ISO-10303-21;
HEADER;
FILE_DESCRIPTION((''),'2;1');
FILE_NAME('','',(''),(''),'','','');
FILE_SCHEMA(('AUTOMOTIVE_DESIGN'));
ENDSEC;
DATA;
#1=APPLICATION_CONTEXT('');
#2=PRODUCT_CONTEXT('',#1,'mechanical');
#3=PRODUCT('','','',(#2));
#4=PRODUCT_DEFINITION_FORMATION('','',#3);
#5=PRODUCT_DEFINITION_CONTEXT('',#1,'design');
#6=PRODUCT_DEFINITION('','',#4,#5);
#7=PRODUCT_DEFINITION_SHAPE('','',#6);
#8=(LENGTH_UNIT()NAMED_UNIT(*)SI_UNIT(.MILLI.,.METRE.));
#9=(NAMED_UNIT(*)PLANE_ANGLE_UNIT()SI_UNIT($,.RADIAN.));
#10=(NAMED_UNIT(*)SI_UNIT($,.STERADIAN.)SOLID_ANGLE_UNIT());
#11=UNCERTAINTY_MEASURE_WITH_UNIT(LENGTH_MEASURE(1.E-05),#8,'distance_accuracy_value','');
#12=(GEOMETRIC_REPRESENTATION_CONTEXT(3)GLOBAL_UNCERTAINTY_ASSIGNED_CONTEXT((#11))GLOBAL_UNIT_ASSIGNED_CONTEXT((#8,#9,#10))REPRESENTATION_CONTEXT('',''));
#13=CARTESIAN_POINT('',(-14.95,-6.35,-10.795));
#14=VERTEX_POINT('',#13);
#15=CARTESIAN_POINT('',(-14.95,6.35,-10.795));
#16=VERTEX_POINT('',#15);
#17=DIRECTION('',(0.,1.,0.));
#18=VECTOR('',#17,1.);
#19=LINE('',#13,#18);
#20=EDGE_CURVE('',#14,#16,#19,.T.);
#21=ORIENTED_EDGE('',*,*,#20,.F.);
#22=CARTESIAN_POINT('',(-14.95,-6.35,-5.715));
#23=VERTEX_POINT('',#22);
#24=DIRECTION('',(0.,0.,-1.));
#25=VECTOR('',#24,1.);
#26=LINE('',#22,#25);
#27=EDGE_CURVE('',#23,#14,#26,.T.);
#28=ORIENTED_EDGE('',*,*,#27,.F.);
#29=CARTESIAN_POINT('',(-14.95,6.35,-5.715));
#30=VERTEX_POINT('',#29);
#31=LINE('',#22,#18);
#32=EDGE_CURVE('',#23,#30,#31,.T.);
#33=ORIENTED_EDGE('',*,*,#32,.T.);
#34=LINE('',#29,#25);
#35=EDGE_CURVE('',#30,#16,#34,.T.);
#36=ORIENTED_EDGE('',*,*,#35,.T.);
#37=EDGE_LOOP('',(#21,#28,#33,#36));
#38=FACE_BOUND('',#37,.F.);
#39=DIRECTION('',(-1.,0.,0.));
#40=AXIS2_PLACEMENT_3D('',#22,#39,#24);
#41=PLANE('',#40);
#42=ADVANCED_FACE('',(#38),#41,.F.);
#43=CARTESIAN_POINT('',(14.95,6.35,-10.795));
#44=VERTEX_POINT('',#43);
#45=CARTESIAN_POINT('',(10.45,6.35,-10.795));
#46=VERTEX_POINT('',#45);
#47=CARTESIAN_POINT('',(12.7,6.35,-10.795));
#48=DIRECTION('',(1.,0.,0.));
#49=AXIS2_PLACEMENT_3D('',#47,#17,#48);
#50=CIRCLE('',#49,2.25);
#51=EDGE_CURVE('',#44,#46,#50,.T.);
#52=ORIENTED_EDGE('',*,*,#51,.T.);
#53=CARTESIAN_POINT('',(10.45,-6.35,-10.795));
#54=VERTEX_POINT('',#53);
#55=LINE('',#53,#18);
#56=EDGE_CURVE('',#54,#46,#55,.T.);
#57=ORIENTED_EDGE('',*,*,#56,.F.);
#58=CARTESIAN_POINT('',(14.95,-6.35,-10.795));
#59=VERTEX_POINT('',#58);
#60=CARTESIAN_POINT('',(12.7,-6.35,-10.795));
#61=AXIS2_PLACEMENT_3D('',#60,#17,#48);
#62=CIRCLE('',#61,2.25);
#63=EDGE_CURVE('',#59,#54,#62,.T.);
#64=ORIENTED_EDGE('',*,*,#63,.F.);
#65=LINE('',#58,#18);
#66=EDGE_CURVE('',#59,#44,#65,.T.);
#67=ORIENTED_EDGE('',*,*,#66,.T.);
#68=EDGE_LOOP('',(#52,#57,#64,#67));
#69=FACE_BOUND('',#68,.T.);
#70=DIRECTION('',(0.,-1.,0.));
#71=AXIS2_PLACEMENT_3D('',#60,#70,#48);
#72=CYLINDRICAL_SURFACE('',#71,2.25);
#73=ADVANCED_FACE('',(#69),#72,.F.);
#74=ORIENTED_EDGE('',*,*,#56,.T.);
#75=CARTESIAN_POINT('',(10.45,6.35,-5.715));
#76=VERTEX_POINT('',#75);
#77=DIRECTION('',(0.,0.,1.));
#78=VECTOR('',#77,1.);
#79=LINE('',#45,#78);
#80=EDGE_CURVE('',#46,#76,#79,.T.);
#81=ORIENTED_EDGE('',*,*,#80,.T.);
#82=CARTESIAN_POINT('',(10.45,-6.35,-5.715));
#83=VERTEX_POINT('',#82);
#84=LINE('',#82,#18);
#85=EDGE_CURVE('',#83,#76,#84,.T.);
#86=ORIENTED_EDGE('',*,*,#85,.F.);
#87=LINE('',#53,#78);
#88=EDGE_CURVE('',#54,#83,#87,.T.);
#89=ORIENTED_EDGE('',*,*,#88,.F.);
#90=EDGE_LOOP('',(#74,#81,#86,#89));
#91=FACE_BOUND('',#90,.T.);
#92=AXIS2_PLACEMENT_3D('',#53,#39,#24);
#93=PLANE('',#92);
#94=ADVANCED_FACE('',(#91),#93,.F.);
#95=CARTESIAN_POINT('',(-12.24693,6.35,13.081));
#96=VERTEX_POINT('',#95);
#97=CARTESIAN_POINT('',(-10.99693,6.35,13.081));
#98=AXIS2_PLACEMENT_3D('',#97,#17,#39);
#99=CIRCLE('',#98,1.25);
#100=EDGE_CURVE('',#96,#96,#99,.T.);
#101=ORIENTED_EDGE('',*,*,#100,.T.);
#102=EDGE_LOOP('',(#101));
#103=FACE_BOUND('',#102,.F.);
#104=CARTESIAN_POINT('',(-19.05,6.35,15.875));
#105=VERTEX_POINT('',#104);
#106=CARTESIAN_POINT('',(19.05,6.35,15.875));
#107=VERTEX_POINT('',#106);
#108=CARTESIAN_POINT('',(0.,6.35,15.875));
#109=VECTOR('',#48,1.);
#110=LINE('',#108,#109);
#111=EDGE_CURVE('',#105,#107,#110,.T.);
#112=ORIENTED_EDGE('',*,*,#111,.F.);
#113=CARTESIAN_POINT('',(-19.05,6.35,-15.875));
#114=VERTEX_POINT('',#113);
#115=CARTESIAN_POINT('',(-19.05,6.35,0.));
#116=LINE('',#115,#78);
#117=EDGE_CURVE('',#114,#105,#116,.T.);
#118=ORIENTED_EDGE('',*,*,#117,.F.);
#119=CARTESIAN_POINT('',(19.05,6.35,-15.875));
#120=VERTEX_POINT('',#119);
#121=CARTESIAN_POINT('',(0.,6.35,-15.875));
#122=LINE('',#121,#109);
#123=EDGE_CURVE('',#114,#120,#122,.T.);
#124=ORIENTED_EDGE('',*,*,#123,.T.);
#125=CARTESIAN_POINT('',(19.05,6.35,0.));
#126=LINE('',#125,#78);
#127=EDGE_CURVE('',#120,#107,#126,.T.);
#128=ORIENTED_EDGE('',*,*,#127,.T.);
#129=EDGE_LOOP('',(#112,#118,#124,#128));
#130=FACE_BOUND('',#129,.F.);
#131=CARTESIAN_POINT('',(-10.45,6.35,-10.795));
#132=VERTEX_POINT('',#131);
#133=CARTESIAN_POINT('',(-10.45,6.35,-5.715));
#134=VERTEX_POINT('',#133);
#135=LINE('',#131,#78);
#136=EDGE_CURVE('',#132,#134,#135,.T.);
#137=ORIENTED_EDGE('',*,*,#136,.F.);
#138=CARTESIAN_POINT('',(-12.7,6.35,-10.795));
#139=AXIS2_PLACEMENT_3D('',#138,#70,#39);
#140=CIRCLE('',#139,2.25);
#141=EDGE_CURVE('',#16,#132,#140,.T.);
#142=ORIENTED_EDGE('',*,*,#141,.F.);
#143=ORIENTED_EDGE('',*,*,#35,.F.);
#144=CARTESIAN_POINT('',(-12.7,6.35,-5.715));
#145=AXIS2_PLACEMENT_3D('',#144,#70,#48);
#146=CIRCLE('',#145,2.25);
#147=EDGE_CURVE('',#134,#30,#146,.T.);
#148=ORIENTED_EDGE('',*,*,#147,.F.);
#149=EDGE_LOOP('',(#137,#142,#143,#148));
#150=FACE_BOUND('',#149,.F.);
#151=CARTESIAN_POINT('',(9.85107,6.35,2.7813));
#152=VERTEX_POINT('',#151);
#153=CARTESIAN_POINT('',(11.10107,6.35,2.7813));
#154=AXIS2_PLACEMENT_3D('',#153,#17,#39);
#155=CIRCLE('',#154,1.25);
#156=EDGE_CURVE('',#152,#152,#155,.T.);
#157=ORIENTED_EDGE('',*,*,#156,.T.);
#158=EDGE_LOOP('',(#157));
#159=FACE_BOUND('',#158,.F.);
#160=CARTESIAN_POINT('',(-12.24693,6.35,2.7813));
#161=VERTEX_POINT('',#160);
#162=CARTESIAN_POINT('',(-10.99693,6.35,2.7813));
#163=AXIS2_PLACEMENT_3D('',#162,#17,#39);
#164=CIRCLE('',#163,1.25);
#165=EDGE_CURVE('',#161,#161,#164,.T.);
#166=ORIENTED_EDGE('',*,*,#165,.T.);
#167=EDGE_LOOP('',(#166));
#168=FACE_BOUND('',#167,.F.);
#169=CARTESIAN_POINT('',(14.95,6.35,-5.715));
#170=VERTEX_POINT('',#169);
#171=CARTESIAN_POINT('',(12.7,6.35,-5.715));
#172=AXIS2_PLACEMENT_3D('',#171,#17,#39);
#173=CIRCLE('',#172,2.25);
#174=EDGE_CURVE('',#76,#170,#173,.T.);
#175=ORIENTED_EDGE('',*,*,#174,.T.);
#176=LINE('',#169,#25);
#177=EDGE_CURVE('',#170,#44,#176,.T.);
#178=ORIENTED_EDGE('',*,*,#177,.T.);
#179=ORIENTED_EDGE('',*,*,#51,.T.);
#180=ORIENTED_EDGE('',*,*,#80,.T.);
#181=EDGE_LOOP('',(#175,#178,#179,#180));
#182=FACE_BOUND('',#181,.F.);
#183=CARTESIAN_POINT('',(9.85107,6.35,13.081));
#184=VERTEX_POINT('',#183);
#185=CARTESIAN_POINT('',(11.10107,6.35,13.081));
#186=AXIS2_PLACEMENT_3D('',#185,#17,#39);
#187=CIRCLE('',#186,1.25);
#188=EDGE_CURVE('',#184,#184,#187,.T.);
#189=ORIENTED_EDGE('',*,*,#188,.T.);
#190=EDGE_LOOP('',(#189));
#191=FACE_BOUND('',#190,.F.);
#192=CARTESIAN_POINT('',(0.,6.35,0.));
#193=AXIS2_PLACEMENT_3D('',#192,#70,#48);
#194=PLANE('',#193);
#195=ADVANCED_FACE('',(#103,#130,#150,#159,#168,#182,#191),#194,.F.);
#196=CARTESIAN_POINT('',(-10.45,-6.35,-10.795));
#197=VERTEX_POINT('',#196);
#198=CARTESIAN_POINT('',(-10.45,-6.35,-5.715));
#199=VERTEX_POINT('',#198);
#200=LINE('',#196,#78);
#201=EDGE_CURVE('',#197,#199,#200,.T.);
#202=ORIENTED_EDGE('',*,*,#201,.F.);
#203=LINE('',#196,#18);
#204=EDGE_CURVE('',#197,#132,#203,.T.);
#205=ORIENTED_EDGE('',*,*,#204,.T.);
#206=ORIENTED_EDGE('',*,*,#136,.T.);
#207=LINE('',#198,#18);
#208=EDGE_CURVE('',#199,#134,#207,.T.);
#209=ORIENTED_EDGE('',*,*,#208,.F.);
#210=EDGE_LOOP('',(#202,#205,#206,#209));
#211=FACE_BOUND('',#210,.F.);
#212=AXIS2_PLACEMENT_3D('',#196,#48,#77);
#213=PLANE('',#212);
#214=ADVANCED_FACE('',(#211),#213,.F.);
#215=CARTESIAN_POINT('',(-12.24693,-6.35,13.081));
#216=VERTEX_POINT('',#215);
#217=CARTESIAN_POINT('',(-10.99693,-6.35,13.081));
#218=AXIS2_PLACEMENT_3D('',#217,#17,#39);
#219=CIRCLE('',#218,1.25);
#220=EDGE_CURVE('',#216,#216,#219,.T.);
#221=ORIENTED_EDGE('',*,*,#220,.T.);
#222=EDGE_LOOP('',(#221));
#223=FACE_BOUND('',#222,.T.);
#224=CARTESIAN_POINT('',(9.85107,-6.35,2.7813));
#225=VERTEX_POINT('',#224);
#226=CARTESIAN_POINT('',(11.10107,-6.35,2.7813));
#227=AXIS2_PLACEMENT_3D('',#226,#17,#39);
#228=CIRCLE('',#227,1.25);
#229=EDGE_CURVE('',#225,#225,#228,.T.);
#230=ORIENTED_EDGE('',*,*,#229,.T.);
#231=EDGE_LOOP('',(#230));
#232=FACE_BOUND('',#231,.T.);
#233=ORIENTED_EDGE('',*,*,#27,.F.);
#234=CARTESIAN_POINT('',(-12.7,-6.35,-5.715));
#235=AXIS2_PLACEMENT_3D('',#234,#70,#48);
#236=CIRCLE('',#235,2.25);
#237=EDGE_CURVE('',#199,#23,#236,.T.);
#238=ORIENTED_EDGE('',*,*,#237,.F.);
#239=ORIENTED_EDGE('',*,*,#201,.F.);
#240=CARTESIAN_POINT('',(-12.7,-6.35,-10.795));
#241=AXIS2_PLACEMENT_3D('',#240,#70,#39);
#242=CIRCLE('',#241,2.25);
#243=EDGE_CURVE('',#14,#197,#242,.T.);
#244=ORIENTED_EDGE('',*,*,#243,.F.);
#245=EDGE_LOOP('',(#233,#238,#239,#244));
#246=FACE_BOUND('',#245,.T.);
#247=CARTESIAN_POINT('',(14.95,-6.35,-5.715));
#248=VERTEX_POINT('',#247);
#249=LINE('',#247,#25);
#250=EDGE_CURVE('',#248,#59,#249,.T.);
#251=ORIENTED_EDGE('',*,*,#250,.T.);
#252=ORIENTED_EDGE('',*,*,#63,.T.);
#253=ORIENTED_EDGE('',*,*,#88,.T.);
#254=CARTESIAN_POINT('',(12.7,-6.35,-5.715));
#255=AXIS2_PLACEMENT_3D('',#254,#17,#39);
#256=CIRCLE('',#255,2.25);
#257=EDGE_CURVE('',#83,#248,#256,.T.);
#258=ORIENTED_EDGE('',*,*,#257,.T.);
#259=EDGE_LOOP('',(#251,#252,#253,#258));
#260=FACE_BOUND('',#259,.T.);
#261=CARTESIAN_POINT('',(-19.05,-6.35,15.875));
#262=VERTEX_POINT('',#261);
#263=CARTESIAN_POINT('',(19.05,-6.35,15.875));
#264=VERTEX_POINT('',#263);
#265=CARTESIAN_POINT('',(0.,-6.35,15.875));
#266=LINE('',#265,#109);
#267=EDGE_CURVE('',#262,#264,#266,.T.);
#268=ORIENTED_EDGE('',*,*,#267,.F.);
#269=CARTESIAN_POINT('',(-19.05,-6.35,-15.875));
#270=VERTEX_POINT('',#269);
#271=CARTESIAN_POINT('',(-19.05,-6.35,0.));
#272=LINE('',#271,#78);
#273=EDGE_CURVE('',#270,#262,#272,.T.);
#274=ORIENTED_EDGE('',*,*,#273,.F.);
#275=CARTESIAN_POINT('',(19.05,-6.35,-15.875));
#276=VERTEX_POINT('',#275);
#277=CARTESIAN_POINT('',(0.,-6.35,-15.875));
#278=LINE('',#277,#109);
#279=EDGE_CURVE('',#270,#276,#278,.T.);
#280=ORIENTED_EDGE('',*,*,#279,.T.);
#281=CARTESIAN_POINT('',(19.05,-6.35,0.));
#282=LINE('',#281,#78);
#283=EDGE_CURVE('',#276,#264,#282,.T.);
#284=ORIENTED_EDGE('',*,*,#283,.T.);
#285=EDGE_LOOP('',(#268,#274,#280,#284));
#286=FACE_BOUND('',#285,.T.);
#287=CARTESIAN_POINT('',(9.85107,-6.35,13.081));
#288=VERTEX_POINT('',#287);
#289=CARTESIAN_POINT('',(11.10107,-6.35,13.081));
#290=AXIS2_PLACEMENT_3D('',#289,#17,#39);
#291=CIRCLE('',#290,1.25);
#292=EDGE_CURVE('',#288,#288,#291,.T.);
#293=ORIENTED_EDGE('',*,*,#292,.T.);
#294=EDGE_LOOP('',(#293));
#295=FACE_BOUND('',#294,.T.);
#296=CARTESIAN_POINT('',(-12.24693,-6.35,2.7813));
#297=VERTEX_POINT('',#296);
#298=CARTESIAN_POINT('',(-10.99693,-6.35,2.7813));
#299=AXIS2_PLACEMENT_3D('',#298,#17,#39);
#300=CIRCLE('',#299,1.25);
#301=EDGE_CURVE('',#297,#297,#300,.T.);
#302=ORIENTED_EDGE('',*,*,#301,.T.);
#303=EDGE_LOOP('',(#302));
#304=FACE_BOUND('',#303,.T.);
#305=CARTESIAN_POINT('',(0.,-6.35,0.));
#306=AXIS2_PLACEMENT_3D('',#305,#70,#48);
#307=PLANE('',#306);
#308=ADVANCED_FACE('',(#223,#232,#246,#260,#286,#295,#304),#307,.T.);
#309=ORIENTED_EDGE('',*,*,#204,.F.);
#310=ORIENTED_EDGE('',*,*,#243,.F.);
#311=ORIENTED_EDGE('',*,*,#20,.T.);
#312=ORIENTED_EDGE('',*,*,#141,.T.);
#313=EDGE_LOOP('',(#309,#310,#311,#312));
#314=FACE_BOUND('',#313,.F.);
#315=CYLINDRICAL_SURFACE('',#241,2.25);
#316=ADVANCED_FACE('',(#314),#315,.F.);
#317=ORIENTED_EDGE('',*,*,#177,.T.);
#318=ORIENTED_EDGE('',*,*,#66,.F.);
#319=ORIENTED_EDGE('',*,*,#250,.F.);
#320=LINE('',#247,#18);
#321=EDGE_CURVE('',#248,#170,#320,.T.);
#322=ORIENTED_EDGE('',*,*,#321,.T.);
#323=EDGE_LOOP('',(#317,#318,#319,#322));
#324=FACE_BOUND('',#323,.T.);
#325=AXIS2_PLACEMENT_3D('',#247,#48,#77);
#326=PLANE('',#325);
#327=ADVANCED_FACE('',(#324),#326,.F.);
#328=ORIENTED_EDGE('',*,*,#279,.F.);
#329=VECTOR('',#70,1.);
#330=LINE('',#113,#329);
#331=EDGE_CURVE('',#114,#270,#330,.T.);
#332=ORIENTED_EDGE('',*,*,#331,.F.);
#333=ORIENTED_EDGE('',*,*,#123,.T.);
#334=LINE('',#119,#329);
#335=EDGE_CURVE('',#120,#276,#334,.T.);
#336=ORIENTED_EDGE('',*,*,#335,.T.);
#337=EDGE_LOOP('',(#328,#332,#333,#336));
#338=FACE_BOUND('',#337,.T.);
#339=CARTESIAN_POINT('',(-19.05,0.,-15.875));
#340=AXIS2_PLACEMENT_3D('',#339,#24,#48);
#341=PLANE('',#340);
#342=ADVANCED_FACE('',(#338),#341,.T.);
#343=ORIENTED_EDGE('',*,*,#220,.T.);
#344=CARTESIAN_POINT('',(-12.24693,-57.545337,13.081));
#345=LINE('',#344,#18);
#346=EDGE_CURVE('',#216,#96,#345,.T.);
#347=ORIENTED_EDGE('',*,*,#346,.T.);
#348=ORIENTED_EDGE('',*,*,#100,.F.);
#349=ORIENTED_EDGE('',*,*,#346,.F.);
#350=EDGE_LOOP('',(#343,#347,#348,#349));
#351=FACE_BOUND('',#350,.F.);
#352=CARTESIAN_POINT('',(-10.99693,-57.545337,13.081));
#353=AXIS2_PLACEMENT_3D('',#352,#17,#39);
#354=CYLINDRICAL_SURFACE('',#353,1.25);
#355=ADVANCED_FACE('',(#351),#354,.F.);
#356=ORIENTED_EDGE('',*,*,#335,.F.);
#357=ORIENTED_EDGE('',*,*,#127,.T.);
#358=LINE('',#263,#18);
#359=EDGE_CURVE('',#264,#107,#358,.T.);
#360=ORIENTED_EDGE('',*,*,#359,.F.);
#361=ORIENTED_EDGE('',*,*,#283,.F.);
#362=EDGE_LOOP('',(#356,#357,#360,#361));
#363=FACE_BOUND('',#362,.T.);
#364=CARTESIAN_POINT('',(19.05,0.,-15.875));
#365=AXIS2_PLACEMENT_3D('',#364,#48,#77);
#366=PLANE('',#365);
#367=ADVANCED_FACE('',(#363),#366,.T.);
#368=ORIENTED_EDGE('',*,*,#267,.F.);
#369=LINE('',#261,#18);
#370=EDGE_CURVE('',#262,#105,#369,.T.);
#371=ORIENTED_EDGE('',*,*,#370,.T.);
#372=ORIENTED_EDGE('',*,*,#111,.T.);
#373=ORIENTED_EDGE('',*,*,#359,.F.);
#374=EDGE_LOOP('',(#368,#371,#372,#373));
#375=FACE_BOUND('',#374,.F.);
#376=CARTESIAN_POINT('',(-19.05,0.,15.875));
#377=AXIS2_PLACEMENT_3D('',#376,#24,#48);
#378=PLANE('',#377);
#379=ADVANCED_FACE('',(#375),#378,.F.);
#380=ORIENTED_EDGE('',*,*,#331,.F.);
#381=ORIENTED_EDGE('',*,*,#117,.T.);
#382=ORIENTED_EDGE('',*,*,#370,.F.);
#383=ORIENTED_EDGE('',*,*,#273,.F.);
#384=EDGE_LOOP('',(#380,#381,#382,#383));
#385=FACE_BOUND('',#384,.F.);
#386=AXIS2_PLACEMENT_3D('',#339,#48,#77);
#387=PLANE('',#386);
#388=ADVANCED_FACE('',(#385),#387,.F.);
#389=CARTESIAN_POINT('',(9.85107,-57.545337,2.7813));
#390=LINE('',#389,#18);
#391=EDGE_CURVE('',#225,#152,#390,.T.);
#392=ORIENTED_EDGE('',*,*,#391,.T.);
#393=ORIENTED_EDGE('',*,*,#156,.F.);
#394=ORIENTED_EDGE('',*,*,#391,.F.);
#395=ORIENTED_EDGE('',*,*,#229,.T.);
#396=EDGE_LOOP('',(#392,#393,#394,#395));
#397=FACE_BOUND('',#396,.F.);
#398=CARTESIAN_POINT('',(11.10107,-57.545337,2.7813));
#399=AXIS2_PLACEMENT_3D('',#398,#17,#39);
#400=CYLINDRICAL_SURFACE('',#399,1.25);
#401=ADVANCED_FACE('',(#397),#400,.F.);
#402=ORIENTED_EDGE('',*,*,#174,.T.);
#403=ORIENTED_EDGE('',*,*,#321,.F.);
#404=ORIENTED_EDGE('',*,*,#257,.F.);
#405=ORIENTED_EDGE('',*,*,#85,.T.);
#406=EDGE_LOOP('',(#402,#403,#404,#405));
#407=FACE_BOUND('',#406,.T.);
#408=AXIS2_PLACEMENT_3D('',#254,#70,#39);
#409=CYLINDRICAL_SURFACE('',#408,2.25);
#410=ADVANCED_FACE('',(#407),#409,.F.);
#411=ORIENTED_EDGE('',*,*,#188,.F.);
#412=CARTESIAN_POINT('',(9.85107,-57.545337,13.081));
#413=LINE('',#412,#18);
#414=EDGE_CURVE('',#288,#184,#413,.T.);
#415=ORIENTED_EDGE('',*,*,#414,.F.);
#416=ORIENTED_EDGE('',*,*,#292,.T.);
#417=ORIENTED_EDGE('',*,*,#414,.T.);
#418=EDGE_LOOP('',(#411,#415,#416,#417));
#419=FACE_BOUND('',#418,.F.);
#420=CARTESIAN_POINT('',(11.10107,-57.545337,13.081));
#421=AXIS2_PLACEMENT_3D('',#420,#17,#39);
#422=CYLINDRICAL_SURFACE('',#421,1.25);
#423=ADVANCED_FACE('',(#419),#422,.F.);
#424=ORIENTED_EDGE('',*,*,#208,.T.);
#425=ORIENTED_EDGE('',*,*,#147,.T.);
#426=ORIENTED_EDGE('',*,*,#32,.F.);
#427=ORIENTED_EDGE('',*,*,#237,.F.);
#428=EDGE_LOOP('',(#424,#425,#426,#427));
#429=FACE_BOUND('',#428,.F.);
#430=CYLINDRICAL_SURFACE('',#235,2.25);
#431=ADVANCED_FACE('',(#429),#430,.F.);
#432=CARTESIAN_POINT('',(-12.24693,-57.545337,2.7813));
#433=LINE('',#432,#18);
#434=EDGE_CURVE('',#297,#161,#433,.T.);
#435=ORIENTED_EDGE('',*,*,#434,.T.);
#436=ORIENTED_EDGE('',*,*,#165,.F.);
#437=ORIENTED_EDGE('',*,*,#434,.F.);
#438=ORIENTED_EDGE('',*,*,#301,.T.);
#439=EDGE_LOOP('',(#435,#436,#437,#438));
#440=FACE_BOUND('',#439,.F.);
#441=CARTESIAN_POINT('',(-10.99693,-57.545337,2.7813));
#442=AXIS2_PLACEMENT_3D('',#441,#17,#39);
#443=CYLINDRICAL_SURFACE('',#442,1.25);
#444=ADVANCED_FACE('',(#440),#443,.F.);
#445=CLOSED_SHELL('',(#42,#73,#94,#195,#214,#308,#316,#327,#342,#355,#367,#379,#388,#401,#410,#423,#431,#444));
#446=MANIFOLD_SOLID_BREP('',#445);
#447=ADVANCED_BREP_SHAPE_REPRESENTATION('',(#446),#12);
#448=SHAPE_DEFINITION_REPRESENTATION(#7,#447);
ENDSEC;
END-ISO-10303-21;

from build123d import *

# Parameters (mm, degrees)
F0_W     = 38.1
F0_H     = 31.75
F1_DEPTH = 6.35
F3_D     = 2.5
F5_DEPTH = 12.7


# Not quite as in the source:
# - a pattern or mirror of a feature is missing from the dataset's text; its kind, count and spacing are read off the source's solid


with BuildPart() as f1:
    # F0 (on Front) → F1 (new body, symmetric)
    with BuildSketch(Plane.XZ):
        Rectangle(F0_W, F0_H)
    extrude(amount=F1_DEPTH, both=True)

    # F3 (through all)
    with Locations(Plane.XZ.offset(6.35)):
        with Locations((-10.99693, 2.7813), (11.10107, 13.081), (-10.99693, 13.081), (11.10107, 2.7813)):
            Hole(F3_D / 2)

    # F4 (on face) → F5 (cut, through all)
    with BuildSketch(Plane.XZ.offset(6.35)):
        with BuildLine():
            ThreePointArc((-10.45, -5.715), (-12.7, -3.465), (-14.95, -5.715))
            Line((-14.95, -5.715), (-14.95, -10.795))
            ThreePointArc((-14.95, -10.795), (-12.7, -13.045), (-10.45, -10.795))
            Line((-10.45, -10.795), (-10.45, -5.715))
        make_face()
    f5 = extrude(amount=-F5_DEPTH, mode=Mode.SUBTRACT)

    # F5_copies: F5 across plane
    add(f5.mirror(Plane(origin=(0, 0, 0), x_dir=(0, 0, 1), z_dir=(1, 0, 0))), mode=Mode.SUBTRACT)


solid = f1.part
